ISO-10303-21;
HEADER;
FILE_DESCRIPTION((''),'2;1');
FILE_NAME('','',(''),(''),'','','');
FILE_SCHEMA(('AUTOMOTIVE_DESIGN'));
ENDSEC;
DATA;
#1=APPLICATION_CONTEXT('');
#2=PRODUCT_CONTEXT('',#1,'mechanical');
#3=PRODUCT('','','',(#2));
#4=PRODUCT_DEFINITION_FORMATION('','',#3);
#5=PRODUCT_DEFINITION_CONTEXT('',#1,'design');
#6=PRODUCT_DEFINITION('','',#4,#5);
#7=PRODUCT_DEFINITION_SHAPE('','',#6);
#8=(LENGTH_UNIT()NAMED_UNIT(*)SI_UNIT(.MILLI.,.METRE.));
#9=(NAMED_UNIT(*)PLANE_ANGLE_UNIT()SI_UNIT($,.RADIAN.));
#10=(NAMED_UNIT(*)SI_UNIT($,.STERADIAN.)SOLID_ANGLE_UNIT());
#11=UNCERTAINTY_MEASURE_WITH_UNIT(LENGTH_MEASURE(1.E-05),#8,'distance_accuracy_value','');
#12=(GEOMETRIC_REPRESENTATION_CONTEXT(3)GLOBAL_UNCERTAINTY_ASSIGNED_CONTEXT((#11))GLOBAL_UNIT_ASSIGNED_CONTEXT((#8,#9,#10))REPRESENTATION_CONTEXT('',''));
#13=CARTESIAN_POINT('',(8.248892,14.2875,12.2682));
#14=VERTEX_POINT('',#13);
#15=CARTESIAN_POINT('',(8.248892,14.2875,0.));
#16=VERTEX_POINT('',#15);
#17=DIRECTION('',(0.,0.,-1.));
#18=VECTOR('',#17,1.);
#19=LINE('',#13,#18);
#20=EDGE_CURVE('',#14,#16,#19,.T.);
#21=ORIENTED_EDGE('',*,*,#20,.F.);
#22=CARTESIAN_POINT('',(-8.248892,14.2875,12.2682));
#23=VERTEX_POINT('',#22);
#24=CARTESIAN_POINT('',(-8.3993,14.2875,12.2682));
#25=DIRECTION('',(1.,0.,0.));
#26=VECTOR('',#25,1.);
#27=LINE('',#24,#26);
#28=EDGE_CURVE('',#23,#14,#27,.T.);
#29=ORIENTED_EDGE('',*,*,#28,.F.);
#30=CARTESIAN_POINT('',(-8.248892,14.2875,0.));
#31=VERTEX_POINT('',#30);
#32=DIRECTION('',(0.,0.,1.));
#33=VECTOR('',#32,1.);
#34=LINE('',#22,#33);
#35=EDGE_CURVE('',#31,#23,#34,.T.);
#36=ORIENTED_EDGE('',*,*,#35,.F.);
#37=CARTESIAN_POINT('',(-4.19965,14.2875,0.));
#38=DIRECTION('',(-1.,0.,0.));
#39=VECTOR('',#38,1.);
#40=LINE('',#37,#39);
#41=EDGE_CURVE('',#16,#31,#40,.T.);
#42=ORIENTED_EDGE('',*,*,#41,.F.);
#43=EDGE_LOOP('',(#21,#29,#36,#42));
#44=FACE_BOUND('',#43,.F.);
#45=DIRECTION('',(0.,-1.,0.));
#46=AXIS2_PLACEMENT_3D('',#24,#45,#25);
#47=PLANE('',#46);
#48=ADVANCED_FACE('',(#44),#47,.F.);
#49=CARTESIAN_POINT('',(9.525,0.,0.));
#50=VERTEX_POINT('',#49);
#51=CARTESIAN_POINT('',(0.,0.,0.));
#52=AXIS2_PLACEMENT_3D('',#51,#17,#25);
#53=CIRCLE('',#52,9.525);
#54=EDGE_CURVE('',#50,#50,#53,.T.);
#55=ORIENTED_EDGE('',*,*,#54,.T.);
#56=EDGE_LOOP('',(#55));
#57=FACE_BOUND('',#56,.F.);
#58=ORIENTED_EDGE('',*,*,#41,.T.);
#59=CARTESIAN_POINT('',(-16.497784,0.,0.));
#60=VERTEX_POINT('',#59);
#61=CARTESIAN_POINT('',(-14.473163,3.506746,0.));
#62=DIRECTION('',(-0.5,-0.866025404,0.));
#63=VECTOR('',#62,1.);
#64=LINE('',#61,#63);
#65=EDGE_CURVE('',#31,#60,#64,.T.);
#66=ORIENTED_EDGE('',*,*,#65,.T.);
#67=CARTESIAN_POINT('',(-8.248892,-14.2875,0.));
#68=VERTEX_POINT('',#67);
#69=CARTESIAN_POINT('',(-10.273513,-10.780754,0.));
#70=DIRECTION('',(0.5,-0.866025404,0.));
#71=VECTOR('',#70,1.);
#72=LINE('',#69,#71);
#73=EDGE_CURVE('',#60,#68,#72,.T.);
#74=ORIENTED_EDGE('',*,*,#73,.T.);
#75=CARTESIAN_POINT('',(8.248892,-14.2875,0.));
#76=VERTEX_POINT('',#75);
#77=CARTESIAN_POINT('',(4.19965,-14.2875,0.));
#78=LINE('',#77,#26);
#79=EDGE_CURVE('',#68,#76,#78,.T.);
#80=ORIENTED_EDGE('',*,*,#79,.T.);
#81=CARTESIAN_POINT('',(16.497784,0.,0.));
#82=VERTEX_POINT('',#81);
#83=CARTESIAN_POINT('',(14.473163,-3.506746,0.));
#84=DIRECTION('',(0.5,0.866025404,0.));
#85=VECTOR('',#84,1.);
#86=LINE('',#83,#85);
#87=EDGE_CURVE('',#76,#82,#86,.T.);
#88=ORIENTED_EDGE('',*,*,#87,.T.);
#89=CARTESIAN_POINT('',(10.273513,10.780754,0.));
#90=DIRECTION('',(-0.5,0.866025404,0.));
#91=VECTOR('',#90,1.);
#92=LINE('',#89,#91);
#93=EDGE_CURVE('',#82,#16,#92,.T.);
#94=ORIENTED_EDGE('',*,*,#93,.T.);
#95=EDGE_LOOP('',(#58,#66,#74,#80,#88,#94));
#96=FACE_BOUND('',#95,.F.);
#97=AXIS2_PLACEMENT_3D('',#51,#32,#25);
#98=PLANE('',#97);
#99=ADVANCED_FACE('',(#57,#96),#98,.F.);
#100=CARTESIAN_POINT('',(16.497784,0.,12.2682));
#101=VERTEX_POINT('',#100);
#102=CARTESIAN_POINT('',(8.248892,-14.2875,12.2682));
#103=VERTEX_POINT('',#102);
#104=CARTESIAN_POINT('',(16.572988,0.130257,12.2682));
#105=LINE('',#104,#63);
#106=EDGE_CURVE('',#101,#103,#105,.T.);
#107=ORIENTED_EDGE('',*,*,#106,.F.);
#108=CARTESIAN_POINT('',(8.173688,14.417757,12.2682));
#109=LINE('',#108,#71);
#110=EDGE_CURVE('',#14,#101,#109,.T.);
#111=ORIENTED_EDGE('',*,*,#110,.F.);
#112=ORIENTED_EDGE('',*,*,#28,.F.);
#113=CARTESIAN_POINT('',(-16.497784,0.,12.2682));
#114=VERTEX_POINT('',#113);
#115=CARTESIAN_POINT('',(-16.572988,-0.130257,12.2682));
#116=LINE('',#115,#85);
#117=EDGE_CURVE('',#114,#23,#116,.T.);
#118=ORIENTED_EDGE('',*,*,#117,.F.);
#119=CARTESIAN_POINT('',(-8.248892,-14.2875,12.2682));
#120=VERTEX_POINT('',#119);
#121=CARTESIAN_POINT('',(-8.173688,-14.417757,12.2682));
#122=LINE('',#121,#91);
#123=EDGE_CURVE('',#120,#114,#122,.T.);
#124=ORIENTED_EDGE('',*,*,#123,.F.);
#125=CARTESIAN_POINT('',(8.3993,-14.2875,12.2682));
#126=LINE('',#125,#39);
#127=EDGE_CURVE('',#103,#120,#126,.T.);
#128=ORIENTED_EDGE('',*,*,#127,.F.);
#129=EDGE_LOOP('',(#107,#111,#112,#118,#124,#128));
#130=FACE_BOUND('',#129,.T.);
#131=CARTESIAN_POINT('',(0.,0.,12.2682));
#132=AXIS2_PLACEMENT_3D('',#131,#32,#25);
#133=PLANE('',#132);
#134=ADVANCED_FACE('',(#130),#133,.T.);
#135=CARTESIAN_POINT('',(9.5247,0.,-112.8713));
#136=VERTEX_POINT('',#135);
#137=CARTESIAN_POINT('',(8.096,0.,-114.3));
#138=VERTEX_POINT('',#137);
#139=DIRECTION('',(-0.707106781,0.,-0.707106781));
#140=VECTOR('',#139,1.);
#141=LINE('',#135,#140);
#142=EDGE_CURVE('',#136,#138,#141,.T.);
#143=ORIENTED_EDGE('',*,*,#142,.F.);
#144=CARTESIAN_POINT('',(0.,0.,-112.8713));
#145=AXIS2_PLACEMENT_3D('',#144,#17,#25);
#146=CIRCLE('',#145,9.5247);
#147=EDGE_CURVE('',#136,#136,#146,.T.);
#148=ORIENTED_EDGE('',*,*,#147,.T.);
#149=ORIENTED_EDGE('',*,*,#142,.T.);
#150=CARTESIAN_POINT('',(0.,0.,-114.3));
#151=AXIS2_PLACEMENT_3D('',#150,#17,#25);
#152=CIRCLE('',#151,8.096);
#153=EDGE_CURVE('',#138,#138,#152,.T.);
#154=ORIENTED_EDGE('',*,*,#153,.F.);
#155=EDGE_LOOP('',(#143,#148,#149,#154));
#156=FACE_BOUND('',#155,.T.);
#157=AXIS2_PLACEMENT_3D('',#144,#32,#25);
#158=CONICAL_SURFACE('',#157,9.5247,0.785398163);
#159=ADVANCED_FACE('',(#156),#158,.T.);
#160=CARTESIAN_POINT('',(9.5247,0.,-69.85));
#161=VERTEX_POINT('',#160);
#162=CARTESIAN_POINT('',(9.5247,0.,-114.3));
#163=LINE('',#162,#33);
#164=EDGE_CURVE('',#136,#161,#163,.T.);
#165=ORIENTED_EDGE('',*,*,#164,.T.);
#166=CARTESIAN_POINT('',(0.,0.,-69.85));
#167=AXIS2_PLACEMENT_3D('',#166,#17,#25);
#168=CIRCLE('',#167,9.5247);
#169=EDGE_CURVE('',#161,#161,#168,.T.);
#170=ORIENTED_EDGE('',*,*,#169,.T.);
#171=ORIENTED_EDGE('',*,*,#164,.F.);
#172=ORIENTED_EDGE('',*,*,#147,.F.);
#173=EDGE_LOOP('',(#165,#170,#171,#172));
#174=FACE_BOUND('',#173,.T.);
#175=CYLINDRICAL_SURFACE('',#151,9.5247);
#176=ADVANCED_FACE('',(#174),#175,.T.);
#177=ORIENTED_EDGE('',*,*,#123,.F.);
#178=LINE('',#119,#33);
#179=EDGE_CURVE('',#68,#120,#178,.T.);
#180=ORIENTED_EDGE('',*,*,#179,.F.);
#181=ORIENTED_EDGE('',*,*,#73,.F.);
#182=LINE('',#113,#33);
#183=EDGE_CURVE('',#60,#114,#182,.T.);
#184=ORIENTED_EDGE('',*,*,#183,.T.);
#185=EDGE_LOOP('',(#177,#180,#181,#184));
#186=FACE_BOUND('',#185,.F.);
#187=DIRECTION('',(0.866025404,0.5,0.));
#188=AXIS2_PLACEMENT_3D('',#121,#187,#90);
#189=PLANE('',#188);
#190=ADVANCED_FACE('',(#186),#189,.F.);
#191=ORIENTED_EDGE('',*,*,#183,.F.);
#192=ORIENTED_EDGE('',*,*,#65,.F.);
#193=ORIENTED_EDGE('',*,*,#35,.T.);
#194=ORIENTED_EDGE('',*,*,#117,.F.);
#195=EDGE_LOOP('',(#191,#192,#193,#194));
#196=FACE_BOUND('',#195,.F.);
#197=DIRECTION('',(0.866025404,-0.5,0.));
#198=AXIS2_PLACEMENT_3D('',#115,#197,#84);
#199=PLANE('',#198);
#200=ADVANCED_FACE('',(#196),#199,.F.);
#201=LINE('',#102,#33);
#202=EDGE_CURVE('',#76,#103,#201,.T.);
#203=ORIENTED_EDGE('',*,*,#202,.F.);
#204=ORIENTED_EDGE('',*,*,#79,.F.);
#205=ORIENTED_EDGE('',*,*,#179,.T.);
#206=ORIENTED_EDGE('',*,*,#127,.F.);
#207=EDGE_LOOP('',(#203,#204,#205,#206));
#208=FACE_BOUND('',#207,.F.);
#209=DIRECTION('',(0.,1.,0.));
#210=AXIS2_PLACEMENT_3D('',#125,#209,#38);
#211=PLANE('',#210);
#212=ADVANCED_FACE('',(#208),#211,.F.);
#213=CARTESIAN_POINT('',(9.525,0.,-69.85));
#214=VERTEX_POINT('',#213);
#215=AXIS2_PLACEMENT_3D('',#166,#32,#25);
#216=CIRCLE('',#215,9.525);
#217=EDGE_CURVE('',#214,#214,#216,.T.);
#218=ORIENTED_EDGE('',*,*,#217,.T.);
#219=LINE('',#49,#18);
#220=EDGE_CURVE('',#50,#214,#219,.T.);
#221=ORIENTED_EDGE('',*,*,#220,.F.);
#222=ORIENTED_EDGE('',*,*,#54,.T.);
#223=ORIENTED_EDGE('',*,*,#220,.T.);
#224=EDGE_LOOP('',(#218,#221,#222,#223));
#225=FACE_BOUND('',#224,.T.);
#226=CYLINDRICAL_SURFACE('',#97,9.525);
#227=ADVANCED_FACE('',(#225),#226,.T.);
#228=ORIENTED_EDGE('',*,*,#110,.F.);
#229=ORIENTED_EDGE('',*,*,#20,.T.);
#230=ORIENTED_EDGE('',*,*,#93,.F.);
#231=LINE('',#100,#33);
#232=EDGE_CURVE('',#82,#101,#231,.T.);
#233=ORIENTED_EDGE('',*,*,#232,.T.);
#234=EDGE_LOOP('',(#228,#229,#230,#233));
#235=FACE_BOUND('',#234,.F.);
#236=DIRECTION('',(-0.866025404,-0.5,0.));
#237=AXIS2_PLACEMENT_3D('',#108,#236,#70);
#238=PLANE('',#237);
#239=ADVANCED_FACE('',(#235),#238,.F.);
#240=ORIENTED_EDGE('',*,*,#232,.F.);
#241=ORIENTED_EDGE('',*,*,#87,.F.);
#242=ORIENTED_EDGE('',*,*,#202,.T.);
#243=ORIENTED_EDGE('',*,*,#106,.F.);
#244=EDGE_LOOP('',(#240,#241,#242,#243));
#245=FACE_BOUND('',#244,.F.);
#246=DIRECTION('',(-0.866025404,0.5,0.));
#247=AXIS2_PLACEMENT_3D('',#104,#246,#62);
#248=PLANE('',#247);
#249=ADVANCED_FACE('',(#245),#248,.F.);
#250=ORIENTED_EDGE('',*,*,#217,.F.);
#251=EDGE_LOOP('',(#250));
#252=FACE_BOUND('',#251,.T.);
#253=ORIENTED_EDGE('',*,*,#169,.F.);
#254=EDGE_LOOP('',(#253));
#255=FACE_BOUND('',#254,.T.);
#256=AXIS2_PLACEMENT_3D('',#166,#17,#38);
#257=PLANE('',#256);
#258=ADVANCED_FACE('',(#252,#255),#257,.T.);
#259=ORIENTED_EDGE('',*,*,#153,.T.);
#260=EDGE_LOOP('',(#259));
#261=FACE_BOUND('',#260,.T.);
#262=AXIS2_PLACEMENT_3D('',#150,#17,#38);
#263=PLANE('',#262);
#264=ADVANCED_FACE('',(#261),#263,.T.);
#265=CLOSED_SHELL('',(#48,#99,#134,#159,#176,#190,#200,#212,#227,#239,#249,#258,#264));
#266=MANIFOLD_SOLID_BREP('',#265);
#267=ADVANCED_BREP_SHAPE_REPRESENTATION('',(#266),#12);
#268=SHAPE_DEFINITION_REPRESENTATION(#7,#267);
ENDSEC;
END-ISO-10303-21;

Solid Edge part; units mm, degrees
sketch "Sketch1" plane through (0, 0, 0) normal (0, 0, 1) x (1, 0, 0)
  circle A0 centre (0, 0) radius 16.5735
  dimension "D1" = 33.147
extrude "Protrusion1" add sketch "Sketch1" along normal blind 12.2682
sketch "Sketch2" plane through (0, 0, 0) normal (0, 0, -1) x (1, 0, 0)
  circle A0 centre (0, 0) radius 9.525
extrude "Protrusion2" add sketch "Sketch2" along normal blind 114.3
sketch "Sketch3" plane through (0, 0, -114.3) normal (0, 0, -1) x (1, 0, 0)
  circle A0 centre (0, 0) radius 9.5247
extrude "Cutout1" cut sketch "Sketch3" against normal blind 44.45 flip side to cut
chamfer "Chamfer_1" distance 1.4287 angle 45 1 edges at (-9.5247, 0, -114.3)
sketch "Sketch4" plane through (0, 0, 12.2682) normal (0, 0, 1) x (1, 0, 0)
  line L0 (-8.3993, 14.2875) -> (8.3993, 14.2875)
  dimension "D1" = 28.575
extrude "Cutout2" cut sketch "Sketch4" against normal up to next material side at (0, 14.3375, 12.2682)
pattern_circular "Pattern1" count 6 over 360 about axis through (0, 0, 12.2682) along (0, 0, 1) of "Cutout2"
properties part number "24102522"
